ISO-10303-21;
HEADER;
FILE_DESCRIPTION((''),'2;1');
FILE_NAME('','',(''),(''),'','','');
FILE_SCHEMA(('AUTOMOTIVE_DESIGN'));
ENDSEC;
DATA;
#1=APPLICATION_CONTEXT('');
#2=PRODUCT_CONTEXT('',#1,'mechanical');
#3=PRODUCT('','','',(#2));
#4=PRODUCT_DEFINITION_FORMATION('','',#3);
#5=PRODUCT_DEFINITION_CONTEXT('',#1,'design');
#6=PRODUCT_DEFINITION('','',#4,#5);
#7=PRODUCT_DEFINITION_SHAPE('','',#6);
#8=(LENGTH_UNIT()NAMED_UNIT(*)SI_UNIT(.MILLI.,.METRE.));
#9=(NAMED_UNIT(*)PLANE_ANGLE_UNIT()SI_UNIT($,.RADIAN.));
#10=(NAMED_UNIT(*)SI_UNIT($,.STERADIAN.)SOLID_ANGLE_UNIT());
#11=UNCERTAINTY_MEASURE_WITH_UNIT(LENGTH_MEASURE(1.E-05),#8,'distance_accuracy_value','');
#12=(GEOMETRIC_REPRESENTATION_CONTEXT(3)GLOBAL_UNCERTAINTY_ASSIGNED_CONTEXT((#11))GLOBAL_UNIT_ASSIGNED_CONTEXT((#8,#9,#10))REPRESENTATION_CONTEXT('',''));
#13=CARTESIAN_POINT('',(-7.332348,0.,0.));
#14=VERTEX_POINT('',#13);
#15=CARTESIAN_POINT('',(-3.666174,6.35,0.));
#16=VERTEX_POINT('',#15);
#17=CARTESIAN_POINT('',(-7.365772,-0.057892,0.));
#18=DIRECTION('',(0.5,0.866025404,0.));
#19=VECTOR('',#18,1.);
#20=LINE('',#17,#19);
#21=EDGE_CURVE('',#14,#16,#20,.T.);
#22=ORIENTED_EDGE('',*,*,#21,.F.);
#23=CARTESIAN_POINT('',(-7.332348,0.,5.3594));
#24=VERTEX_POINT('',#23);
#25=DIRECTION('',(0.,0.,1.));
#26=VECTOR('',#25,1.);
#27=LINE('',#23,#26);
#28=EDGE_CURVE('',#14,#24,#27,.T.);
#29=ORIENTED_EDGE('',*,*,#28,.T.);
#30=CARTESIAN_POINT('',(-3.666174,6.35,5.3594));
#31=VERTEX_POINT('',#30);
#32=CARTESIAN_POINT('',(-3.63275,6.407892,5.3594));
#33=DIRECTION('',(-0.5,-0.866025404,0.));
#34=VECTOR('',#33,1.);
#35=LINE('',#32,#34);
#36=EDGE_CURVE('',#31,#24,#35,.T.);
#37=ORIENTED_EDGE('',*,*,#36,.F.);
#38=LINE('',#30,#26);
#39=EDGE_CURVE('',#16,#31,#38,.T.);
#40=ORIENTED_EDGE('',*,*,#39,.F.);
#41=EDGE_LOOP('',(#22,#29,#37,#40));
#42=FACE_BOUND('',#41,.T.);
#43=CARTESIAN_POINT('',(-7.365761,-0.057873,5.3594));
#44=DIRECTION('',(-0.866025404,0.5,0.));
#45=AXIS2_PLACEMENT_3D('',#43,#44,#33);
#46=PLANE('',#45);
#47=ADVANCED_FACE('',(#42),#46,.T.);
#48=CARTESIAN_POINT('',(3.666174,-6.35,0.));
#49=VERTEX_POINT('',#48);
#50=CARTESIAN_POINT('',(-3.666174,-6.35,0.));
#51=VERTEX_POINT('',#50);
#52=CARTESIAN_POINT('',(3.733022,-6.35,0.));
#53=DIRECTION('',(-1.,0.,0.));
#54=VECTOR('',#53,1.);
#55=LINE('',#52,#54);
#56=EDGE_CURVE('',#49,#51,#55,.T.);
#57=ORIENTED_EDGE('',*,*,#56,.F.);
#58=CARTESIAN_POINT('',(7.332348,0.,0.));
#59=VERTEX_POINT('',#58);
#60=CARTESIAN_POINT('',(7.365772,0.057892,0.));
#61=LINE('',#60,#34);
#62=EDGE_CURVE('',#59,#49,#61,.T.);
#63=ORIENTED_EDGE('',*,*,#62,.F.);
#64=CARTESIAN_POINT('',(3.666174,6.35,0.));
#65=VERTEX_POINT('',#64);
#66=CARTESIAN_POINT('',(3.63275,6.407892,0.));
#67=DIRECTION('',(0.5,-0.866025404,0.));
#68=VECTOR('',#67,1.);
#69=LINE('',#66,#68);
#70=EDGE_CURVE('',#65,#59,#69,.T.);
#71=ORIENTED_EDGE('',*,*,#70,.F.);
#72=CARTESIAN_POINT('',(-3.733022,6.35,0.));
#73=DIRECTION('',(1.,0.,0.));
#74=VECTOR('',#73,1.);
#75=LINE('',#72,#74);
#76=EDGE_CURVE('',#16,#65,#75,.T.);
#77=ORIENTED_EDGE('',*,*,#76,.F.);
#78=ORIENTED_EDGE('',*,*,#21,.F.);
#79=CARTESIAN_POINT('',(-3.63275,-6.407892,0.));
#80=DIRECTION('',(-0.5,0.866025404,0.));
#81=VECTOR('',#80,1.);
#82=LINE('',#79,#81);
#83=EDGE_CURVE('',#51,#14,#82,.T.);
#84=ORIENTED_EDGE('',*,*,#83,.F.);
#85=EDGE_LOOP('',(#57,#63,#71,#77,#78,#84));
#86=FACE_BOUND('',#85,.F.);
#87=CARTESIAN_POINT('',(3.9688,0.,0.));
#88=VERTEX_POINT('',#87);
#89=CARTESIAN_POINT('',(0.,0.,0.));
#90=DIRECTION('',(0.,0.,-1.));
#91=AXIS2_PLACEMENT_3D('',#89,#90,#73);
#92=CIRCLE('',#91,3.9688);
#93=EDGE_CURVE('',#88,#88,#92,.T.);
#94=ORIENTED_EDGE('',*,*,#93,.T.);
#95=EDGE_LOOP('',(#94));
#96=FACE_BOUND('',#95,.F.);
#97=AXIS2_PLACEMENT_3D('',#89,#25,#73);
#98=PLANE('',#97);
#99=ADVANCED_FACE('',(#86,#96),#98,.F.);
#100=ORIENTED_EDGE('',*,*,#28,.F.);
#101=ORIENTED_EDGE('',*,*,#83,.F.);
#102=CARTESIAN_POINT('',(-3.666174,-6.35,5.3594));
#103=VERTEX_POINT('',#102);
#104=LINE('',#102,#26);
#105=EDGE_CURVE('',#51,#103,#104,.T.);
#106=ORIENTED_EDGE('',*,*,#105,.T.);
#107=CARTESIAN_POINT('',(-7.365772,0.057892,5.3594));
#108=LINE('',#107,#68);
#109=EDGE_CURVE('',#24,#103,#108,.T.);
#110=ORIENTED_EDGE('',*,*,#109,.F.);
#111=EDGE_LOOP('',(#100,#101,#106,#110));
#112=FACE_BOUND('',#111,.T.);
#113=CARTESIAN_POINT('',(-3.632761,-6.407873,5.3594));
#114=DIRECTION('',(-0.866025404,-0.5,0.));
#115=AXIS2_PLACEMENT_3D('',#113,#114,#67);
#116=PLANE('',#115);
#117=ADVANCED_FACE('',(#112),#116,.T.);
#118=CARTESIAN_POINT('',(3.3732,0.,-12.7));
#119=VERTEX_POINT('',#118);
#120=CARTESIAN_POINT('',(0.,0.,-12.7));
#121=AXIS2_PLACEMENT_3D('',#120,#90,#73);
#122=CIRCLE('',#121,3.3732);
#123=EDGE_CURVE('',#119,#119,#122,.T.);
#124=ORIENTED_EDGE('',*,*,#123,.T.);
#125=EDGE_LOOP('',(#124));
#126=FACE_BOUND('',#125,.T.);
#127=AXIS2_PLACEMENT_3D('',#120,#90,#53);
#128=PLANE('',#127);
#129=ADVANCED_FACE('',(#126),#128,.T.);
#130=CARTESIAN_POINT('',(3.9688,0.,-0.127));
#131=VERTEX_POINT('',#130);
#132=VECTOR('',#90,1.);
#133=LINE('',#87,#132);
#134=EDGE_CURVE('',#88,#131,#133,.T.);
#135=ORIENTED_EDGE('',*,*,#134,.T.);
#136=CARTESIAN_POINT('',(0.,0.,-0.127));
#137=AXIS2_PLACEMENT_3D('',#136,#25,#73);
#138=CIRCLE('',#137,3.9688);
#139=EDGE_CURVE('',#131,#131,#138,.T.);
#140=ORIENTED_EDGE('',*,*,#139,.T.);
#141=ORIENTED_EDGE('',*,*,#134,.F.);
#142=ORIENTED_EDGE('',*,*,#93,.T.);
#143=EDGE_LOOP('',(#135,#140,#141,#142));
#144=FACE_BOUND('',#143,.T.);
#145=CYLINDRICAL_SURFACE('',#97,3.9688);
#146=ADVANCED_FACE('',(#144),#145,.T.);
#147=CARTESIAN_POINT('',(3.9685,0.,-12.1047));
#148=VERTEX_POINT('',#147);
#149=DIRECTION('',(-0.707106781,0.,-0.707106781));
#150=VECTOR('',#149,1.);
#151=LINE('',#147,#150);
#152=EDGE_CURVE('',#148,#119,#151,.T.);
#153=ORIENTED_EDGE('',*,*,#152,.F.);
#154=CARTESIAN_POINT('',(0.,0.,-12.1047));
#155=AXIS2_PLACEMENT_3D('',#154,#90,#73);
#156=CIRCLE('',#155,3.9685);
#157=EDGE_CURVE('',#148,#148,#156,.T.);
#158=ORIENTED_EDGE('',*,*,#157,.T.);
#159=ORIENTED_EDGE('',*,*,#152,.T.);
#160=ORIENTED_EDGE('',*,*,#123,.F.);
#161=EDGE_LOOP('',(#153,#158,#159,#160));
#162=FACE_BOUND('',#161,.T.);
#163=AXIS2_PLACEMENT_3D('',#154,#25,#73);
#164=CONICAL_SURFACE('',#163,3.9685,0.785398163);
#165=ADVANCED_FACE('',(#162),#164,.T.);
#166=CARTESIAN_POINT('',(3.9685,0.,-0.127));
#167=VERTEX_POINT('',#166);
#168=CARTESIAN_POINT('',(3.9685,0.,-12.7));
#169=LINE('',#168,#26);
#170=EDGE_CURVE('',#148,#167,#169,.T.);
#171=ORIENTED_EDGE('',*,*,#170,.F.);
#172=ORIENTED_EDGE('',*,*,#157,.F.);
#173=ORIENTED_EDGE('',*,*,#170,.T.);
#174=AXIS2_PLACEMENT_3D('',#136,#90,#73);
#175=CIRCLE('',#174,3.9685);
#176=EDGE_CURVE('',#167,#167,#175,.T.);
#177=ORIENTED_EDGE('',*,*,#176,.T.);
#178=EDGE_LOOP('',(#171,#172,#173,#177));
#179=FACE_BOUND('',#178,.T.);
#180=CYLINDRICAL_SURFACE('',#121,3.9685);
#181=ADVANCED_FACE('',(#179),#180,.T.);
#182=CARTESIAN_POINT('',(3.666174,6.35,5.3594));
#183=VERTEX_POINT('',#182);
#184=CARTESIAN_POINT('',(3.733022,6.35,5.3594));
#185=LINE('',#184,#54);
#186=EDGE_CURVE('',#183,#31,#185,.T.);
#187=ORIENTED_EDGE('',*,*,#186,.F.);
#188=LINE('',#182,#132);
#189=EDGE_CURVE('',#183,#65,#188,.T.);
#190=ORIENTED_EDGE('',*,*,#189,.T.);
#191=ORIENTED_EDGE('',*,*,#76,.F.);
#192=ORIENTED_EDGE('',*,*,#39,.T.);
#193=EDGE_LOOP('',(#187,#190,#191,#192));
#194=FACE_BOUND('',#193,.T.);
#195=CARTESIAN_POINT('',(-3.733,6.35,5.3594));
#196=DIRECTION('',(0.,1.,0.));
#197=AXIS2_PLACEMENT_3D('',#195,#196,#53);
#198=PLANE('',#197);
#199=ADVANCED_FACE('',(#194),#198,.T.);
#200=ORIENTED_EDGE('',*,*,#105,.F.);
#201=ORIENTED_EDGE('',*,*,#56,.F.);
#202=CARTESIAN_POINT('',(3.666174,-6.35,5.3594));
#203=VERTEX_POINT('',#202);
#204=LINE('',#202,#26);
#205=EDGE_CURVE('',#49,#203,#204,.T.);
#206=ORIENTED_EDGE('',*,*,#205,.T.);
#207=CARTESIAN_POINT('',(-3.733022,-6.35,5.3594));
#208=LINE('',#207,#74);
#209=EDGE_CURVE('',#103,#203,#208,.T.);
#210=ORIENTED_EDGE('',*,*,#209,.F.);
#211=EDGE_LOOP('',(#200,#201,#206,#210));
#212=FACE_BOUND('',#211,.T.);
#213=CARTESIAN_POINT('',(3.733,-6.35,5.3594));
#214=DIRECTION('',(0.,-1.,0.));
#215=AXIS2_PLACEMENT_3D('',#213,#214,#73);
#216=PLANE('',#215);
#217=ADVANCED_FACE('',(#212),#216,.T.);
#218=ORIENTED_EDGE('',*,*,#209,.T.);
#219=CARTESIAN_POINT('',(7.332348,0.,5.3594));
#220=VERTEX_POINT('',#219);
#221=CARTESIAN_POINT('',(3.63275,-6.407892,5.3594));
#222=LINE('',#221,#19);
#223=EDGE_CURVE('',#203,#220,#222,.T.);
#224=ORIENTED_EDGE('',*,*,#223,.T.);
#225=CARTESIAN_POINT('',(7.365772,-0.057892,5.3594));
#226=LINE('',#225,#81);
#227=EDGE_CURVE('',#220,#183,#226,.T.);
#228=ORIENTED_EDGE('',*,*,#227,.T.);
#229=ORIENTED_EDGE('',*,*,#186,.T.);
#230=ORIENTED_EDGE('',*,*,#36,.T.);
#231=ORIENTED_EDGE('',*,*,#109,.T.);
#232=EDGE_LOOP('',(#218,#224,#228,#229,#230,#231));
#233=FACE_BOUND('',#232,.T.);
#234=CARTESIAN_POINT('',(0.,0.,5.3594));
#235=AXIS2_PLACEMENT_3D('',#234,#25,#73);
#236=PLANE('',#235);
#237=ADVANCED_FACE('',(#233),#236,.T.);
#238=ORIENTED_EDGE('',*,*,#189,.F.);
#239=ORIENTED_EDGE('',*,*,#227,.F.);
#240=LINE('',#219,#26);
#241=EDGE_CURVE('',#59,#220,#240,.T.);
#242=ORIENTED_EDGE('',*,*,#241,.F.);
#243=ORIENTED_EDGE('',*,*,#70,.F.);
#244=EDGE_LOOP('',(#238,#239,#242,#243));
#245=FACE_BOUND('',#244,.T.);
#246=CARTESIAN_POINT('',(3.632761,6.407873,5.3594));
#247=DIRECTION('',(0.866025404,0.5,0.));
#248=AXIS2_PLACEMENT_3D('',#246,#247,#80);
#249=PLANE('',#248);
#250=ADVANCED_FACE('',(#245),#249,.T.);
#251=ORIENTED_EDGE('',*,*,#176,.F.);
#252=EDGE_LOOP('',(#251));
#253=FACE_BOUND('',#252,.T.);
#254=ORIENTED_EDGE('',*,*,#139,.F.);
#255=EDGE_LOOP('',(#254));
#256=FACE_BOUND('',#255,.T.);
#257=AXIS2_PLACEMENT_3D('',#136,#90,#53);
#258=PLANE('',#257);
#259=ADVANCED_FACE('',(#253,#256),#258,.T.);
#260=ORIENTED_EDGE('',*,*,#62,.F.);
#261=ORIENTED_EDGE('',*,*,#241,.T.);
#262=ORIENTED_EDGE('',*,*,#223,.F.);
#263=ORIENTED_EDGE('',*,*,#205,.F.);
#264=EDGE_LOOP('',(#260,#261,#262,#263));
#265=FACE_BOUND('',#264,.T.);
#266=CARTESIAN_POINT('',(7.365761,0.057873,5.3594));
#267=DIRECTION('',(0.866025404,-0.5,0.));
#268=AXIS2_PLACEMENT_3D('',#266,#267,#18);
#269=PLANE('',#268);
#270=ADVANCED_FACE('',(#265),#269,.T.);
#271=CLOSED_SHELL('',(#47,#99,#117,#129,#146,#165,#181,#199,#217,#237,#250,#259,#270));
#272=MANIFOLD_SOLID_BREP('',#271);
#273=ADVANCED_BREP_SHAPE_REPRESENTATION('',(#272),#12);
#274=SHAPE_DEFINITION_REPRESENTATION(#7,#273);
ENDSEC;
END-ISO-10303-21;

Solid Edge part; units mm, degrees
sketch "Sketch1" plane through (0, 0, 0) normal (0, 0, 1) x (1, 0, 0)
  circle A0 centre (0, 0) radius 7.366
  dimension "D1" = 14.732
extrude "Protrusion1" add sketch "Sketch1" along normal blind 5.3594
sketch "Sketch2" plane through (0, 0, 0) normal (0, 0, -1) x (1, 0, 0)
  circle A0 centre (0, 0) radius 3.9688
extrude "Protrusion2" add sketch "Sketch2" along normal blind 12.7
sketch "Sketch3" plane through (0, 0, -12.7) normal (0, 0, -1) x (1, 0, 0)
  circle A0 centre (0, 0) radius 3.9685
extrude "Cutout1" cut sketch "Sketch3" against normal blind 12.573 flip side to cut
chamfer "Chamfer_1" distance 0.5953 angle 45 1 edges at (-3.9685, 0, -12.7)
sketch "Sketch4" plane through (0, 0, 5.3594) normal (0, 0, 1) x (1, 0, 0)
  line L0 (-3.733, 6.35) -> (3.733, 6.35)
  dimension "D1" = 12.7
extrude "Cutout2" cut sketch "Sketch4" against normal up to next material side at (0, 6.4, 5.3594)
pattern_circular "Pattern1" count 6 over 360 about axis through (0, 0, 5.3594) along (0, 0, 1) of "Cutout2"
properties part number "24100159"
